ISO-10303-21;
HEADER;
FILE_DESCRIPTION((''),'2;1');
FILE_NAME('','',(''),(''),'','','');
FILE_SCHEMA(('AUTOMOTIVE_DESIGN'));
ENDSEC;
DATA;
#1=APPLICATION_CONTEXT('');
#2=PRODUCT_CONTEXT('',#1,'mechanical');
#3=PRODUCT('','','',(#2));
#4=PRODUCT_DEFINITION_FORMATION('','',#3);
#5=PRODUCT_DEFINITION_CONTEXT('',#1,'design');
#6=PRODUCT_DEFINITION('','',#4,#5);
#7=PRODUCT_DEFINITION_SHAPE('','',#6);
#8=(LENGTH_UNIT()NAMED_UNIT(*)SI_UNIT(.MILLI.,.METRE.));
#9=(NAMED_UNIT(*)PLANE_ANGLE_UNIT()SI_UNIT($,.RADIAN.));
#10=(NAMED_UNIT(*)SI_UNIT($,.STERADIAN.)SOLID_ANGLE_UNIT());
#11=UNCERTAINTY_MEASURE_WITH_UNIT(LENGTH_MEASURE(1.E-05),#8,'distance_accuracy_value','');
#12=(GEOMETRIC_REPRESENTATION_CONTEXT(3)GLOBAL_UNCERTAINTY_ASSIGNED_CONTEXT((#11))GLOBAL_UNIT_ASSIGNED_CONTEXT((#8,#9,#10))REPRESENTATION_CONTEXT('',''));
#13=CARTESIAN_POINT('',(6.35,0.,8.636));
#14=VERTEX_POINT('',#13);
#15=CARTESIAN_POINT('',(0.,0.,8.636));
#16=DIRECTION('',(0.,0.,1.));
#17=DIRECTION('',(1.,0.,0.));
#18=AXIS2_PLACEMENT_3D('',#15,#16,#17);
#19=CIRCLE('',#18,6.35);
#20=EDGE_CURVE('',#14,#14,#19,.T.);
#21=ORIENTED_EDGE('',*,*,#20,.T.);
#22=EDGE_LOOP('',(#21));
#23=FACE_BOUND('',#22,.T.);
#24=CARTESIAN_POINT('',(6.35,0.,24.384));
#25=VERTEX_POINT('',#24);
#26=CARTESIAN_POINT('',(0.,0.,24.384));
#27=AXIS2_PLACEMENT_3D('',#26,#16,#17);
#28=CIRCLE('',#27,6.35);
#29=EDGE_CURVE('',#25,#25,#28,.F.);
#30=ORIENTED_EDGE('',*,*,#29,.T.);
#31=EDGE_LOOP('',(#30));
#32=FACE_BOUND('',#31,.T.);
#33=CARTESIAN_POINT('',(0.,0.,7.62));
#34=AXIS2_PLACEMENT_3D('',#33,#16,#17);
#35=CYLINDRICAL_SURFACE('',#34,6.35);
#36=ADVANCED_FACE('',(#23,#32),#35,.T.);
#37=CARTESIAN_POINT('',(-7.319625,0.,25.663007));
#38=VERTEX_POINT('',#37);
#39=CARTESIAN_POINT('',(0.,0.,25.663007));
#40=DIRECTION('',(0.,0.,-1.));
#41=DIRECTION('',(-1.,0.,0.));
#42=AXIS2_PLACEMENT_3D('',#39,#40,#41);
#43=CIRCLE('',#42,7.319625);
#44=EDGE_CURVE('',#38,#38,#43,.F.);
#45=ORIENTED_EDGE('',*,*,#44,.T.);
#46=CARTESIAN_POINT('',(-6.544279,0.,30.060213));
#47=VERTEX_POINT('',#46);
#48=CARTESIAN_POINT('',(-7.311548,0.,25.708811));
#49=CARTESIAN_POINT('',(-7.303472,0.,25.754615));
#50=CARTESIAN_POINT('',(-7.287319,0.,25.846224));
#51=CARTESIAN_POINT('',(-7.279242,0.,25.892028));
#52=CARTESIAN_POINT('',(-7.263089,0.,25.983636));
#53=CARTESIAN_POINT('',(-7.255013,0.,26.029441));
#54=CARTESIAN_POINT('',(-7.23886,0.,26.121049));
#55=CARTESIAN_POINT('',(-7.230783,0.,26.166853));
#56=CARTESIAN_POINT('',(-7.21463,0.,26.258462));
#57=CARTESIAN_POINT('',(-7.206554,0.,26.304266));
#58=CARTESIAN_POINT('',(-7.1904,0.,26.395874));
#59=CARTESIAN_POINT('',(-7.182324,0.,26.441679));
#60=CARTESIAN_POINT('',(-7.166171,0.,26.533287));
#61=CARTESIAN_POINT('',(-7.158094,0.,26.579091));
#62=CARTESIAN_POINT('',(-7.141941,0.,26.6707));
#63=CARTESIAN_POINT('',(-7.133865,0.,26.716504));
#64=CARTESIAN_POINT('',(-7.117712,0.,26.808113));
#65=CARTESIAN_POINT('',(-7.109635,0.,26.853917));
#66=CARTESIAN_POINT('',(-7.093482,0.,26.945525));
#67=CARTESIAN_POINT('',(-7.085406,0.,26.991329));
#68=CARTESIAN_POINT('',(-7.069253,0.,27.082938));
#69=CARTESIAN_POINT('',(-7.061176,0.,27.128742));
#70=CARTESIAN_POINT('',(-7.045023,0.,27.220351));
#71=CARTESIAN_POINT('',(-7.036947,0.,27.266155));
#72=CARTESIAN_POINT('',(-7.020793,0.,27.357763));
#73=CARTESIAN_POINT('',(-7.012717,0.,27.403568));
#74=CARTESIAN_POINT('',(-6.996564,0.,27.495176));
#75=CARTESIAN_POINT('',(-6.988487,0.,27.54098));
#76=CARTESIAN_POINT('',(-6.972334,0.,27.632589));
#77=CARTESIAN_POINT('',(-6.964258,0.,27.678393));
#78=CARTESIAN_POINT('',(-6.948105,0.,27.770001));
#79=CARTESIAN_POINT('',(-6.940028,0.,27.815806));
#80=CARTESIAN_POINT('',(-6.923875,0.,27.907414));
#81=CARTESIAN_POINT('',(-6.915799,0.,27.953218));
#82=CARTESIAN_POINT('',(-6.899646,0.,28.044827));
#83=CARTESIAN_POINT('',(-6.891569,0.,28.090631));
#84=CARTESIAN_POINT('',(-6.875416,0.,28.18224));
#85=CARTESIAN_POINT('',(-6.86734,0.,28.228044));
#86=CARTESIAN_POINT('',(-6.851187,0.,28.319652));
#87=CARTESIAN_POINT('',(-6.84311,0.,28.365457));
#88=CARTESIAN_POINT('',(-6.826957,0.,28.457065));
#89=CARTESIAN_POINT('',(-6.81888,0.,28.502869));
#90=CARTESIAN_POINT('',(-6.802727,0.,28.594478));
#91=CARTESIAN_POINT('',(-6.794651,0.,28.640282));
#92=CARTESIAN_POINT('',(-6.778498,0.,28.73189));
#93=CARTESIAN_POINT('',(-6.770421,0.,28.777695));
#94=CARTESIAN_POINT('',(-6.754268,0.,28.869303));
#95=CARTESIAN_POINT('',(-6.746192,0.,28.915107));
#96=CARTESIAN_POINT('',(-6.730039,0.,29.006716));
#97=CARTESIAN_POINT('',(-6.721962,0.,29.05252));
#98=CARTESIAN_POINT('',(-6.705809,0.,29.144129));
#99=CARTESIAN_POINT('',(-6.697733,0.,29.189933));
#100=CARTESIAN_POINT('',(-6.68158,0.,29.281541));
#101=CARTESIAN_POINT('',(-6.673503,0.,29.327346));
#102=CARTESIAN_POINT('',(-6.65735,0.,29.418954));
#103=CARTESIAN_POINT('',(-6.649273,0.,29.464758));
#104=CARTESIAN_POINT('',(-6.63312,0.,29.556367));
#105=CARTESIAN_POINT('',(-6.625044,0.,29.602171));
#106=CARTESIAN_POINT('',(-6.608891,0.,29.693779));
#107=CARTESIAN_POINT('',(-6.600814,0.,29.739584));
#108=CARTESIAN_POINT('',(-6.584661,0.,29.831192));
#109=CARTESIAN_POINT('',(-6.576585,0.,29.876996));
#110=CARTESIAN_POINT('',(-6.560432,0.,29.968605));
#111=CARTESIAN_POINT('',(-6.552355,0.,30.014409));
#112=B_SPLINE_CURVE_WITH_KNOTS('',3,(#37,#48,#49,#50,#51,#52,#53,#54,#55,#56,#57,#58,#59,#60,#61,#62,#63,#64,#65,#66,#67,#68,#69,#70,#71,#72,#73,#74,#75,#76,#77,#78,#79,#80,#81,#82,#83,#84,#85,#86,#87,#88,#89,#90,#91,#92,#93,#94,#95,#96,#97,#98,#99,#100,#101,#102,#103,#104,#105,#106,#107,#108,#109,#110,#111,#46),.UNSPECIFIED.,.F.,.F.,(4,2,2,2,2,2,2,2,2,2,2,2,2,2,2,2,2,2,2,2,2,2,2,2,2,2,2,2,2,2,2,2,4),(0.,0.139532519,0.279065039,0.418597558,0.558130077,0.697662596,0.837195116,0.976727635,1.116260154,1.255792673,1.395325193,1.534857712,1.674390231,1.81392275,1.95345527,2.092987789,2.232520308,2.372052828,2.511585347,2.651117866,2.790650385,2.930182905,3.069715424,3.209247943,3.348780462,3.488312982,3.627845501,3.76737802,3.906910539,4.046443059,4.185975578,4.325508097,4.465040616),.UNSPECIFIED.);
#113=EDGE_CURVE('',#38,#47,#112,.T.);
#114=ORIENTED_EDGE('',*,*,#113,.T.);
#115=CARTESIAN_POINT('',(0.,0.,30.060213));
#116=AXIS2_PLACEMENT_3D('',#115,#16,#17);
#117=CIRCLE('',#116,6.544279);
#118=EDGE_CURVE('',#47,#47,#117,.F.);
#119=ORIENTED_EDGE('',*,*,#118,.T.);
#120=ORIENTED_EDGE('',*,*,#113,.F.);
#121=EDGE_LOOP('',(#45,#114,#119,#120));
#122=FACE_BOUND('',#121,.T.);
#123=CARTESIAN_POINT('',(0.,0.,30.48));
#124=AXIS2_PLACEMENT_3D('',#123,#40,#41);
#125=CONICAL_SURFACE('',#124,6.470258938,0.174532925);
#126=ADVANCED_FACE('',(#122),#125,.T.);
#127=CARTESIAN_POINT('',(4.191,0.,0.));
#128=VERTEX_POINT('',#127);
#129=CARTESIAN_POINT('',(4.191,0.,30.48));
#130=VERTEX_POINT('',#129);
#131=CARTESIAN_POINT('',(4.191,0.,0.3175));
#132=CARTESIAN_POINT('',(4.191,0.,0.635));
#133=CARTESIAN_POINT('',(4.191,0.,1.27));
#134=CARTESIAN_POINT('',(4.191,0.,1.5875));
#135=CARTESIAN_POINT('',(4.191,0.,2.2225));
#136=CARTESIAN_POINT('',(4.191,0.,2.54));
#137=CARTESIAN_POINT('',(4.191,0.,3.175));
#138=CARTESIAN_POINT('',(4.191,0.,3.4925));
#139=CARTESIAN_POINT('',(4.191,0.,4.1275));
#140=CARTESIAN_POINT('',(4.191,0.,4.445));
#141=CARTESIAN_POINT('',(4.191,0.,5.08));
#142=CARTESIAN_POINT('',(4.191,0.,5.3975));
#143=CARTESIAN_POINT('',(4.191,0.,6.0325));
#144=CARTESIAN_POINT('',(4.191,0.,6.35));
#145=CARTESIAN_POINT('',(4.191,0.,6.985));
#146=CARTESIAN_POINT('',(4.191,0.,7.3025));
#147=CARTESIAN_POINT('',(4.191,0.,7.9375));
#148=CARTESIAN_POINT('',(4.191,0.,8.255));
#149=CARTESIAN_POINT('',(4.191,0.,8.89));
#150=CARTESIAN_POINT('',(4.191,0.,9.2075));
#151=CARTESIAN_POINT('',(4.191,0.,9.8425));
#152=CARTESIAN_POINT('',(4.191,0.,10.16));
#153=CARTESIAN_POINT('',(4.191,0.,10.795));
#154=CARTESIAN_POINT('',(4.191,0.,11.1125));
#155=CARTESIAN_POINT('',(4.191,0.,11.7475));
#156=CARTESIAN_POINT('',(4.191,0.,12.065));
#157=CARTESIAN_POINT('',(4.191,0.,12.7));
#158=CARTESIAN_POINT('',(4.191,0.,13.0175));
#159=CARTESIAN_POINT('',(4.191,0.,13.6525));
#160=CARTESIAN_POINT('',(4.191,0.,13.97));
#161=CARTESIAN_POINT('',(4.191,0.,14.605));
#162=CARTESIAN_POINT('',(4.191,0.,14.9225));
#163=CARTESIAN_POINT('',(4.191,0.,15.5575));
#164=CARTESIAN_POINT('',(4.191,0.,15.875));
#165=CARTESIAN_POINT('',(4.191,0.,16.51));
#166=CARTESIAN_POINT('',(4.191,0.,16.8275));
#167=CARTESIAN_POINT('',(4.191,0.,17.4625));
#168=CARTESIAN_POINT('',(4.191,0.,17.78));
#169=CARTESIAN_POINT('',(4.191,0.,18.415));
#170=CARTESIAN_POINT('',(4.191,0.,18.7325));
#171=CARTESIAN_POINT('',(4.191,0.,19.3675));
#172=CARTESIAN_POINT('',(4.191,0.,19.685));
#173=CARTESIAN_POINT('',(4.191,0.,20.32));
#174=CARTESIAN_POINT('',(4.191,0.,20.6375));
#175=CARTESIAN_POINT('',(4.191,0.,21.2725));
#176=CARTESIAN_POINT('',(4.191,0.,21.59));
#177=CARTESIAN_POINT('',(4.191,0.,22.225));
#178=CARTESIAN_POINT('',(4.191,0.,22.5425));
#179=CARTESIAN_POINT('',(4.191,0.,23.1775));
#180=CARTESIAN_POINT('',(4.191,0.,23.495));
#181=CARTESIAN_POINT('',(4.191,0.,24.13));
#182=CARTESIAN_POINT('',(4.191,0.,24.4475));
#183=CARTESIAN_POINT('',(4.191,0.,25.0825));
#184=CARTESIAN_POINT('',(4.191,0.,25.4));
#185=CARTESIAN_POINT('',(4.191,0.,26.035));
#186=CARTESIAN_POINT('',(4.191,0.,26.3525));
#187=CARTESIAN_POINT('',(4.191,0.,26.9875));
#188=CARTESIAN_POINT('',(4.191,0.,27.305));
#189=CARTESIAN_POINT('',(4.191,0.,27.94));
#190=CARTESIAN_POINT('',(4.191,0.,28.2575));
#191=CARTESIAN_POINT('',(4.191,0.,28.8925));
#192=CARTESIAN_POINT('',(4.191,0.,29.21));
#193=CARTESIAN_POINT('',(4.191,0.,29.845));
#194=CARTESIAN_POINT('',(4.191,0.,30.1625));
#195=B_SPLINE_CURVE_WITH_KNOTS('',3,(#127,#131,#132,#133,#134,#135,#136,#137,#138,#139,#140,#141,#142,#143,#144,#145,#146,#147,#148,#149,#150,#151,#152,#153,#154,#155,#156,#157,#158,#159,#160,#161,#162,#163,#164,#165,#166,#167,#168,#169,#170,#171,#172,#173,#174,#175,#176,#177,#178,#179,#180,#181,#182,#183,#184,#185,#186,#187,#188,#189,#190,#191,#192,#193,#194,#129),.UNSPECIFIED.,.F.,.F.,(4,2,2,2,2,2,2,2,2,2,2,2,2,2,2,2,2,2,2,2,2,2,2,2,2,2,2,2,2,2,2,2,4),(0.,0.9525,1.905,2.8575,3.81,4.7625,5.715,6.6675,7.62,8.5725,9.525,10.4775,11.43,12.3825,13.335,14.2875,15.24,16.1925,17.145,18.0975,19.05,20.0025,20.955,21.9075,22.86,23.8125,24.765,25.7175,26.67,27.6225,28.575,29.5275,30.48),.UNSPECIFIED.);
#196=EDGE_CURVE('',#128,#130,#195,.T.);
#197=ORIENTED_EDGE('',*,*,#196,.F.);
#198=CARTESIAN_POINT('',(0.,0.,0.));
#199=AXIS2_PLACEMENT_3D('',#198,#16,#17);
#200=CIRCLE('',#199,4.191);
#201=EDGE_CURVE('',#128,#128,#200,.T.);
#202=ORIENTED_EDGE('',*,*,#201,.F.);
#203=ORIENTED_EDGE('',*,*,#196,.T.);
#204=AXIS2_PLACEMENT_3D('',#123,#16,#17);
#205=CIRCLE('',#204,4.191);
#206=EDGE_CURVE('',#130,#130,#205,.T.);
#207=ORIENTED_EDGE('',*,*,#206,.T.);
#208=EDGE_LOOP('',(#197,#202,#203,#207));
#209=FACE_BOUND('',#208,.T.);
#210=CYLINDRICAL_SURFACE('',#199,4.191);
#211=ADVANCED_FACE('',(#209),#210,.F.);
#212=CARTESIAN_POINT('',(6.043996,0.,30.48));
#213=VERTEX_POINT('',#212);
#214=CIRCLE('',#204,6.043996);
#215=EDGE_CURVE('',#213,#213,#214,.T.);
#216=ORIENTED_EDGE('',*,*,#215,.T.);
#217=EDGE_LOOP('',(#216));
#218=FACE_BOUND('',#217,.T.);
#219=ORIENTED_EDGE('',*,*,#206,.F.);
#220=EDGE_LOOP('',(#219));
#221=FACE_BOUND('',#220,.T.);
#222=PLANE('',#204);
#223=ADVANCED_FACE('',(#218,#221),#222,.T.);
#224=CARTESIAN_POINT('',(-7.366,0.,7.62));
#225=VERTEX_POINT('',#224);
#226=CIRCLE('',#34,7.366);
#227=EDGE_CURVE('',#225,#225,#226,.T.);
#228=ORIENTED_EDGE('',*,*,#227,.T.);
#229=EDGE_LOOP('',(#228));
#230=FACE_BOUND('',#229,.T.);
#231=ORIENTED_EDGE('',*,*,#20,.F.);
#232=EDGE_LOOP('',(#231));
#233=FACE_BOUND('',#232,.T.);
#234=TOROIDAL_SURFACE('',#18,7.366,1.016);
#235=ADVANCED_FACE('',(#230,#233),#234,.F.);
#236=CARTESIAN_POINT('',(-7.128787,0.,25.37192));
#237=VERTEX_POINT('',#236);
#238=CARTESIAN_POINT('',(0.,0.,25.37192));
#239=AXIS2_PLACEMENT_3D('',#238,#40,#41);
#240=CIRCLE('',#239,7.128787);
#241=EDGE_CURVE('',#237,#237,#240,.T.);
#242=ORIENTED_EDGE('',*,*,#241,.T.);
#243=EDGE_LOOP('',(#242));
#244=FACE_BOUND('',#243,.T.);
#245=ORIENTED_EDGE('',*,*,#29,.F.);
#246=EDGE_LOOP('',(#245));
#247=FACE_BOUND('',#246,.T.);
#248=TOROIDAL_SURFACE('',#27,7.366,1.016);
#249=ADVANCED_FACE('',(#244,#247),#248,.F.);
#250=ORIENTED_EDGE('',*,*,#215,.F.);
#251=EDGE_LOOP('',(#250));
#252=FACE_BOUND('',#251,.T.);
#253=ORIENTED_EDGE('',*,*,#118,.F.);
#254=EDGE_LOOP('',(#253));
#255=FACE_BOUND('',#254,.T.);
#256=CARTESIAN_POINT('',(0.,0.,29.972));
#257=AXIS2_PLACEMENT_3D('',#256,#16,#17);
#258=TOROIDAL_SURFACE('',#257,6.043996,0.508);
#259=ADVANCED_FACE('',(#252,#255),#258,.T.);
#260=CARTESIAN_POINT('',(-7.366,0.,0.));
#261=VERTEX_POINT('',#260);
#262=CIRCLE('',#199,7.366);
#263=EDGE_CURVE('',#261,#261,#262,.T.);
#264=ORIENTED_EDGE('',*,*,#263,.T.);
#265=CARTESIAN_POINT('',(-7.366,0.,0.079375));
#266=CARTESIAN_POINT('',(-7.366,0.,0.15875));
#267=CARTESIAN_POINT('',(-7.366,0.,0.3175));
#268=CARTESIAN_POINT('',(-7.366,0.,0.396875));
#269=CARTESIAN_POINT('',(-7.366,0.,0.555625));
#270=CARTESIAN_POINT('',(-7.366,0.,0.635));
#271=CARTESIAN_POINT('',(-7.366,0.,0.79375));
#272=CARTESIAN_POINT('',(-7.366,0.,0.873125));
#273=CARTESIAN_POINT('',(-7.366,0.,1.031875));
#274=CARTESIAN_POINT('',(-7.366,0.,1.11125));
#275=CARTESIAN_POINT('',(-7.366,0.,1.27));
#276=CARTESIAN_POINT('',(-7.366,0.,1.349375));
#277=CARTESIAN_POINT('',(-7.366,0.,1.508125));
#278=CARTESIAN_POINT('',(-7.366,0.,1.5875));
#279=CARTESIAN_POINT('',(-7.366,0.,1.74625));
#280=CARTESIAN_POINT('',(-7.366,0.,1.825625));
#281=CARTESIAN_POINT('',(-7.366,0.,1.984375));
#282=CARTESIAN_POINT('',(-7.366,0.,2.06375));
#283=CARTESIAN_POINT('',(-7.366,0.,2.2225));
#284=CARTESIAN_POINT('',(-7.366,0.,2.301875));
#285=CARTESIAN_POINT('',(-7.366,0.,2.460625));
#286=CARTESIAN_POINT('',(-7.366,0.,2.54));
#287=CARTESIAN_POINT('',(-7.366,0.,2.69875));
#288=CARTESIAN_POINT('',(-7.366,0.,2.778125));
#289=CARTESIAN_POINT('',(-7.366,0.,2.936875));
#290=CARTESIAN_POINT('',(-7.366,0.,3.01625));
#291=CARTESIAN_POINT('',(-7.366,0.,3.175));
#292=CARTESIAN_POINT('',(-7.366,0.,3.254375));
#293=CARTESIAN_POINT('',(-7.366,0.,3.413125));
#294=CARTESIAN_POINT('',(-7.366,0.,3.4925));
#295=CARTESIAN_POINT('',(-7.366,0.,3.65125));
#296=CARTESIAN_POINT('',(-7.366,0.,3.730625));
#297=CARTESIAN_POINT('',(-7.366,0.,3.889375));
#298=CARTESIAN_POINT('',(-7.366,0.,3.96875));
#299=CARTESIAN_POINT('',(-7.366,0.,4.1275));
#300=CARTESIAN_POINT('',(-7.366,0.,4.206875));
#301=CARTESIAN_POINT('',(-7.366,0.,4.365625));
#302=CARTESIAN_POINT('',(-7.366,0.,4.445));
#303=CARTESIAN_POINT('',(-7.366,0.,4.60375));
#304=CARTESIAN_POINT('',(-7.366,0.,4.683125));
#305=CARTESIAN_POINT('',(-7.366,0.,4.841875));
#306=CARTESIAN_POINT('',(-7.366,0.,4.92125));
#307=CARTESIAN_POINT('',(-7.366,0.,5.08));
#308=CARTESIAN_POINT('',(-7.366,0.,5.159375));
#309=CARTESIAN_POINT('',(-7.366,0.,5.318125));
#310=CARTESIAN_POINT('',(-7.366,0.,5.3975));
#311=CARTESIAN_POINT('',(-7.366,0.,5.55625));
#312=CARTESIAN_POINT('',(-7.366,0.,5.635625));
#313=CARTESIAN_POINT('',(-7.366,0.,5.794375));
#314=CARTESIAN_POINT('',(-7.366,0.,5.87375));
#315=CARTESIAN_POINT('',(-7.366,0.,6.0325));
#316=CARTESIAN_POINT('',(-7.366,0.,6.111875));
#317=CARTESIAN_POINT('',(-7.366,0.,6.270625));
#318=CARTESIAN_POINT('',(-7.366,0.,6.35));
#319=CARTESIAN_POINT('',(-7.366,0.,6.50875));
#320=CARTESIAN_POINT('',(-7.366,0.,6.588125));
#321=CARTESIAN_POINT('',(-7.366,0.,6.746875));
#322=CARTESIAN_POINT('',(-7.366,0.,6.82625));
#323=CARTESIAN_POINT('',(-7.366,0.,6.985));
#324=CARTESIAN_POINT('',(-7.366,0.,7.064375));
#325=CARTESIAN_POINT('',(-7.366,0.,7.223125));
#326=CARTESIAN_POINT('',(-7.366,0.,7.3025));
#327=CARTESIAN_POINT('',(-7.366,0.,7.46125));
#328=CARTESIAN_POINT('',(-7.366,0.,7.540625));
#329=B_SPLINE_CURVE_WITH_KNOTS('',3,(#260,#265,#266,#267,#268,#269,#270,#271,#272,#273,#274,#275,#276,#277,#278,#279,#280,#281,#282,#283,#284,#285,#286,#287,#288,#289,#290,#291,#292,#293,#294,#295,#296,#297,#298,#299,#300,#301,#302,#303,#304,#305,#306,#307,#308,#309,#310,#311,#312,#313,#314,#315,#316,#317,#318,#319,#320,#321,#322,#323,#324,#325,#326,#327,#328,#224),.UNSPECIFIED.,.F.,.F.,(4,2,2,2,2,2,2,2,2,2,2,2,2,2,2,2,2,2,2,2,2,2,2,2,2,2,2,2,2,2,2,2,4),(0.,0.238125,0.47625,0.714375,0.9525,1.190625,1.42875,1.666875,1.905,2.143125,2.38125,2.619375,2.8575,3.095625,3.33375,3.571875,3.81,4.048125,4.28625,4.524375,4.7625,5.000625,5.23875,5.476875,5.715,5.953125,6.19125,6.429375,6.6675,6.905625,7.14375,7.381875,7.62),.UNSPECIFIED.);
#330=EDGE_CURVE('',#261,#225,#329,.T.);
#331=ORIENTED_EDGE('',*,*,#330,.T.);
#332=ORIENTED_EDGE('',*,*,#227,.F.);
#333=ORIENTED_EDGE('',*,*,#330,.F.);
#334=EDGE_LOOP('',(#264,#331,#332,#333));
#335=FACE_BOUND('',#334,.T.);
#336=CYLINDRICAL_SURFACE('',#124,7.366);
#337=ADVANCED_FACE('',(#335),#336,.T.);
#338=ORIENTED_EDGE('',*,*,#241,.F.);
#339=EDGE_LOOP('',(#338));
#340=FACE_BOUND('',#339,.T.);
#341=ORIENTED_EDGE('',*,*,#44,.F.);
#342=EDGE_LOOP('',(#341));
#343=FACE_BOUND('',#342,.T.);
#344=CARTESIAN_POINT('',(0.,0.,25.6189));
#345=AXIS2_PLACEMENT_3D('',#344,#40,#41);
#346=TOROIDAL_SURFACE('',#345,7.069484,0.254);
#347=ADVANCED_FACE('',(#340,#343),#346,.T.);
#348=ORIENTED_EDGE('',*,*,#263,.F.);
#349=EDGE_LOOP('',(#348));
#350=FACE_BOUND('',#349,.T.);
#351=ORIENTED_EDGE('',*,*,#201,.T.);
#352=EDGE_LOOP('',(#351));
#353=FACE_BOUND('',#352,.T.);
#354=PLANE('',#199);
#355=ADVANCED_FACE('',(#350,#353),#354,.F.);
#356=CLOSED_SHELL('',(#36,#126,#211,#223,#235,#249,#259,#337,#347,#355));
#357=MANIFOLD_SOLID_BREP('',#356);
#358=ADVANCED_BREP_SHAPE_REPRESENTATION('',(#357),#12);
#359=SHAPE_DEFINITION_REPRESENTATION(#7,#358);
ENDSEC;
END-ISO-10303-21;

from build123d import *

# Parameters (mm, degrees)
SKETCH1_R           = 7.366
BOSS_EXTRUDE1_DEPTH = 30.48
SKETCH2_R           = 4.191
CUT_EXTRUDE1_DEPTH  = 30.48
CUT_EXTRUDE2_START  = -5.08
SKETCH3_R           = 10.16
SKETCH3_R_2         = 6.35
CUT_EXTRUDE2_DEPTH  = 17.78
FILLET1_R           = 1.016
FILLET2_R           = 1.016
CHAMFER1_SIZE       = 5.08
CHAMFER1_SIZE_2     = 0.895741062
FILLET3_R           = 0.508
FILLET4_R           = 0.254


# Some blends are built 0.0001 mm under size
with BuildPart() as part:
    # Sketch1 → Boss-Extrude1 (new body)
    with BuildSketch(Plane.XY):
        with Locations(Location((0, 0, 0), (0, 0, 180))):
            Circle(SKETCH1_R)
    extrude(amount=BOSS_EXTRUDE1_DEPTH)

    # Sketch2 → Cut-Extrude1 (cut)
    with BuildSketch(Plane.XY.offset(30.48)):
        Circle(SKETCH2_R)
    extrude(amount=-CUT_EXTRUDE1_DEPTH, mode=Mode.SUBTRACT)

    # Sketch3 → Cut-Extrude2 (cut)
    with BuildSketch(Plane.XY.offset(30.48).offset(CUT_EXTRUDE2_START)):
        Circle(SKETCH3_R)
        Circle(SKETCH3_R_2, mode=Mode.SUBTRACT)
    extrude(amount=-CUT_EXTRUDE2_DEPTH, mode=Mode.SUBTRACT)

    # Fillet1
    fillet1_edges = [part.edges().sort_by_distance(p)[0] for p in [
        (-6.35, 0, 7.62),
    ]]
    fillet(fillet1_edges, radius=FILLET1_R - 0.0001)  # a hair under: the kernel refuses the full size

    # Fillet2
    fillet2_edges = [part.edges().sort_by_distance(p)[0] for p in [
        (-6.35, 0, 25.4),
    ]]
    fillet(fillet2_edges, radius=FILLET2_R - 0.0001)  # a hair under: the kernel refuses the full size

    # Chamfer1
    # the kernel refuses this chamfer: 5.08, 0.895741062 mm, written as the material it takes off along each edge
    with BuildSketch(Plane(origin=(0, 0, 30.48), x_dir=(-1, 0, 0), z_dir=(0, 1, 0))) as chamfer1_piece_1:
        Polygon((7.366, -CHAMFER1_SIZE), (7.366 - CHAMFER1_SIZE_2, 0), (7.366, 0), align=None)
    revolve(axis=Axis((0, 0, 30.48), (0, 0, 1)), mode=Mode.SUBTRACT)

    # Fillet3
    fillet3_edges = [part.edges().sort_by_distance(p)[0] for p in [
        (6.470258938, 0, 30.48),
    ]]
    fillet(fillet3_edges, radius=FILLET3_R)

    # Fillet4
    fillet4_edges = [part.edges().sort_by_distance(p)[0] for p in [
        (7.366, 0, 25.4),
    ]]
    fillet(fillet4_edges, radius=FILLET4_R)


solid = part.part
